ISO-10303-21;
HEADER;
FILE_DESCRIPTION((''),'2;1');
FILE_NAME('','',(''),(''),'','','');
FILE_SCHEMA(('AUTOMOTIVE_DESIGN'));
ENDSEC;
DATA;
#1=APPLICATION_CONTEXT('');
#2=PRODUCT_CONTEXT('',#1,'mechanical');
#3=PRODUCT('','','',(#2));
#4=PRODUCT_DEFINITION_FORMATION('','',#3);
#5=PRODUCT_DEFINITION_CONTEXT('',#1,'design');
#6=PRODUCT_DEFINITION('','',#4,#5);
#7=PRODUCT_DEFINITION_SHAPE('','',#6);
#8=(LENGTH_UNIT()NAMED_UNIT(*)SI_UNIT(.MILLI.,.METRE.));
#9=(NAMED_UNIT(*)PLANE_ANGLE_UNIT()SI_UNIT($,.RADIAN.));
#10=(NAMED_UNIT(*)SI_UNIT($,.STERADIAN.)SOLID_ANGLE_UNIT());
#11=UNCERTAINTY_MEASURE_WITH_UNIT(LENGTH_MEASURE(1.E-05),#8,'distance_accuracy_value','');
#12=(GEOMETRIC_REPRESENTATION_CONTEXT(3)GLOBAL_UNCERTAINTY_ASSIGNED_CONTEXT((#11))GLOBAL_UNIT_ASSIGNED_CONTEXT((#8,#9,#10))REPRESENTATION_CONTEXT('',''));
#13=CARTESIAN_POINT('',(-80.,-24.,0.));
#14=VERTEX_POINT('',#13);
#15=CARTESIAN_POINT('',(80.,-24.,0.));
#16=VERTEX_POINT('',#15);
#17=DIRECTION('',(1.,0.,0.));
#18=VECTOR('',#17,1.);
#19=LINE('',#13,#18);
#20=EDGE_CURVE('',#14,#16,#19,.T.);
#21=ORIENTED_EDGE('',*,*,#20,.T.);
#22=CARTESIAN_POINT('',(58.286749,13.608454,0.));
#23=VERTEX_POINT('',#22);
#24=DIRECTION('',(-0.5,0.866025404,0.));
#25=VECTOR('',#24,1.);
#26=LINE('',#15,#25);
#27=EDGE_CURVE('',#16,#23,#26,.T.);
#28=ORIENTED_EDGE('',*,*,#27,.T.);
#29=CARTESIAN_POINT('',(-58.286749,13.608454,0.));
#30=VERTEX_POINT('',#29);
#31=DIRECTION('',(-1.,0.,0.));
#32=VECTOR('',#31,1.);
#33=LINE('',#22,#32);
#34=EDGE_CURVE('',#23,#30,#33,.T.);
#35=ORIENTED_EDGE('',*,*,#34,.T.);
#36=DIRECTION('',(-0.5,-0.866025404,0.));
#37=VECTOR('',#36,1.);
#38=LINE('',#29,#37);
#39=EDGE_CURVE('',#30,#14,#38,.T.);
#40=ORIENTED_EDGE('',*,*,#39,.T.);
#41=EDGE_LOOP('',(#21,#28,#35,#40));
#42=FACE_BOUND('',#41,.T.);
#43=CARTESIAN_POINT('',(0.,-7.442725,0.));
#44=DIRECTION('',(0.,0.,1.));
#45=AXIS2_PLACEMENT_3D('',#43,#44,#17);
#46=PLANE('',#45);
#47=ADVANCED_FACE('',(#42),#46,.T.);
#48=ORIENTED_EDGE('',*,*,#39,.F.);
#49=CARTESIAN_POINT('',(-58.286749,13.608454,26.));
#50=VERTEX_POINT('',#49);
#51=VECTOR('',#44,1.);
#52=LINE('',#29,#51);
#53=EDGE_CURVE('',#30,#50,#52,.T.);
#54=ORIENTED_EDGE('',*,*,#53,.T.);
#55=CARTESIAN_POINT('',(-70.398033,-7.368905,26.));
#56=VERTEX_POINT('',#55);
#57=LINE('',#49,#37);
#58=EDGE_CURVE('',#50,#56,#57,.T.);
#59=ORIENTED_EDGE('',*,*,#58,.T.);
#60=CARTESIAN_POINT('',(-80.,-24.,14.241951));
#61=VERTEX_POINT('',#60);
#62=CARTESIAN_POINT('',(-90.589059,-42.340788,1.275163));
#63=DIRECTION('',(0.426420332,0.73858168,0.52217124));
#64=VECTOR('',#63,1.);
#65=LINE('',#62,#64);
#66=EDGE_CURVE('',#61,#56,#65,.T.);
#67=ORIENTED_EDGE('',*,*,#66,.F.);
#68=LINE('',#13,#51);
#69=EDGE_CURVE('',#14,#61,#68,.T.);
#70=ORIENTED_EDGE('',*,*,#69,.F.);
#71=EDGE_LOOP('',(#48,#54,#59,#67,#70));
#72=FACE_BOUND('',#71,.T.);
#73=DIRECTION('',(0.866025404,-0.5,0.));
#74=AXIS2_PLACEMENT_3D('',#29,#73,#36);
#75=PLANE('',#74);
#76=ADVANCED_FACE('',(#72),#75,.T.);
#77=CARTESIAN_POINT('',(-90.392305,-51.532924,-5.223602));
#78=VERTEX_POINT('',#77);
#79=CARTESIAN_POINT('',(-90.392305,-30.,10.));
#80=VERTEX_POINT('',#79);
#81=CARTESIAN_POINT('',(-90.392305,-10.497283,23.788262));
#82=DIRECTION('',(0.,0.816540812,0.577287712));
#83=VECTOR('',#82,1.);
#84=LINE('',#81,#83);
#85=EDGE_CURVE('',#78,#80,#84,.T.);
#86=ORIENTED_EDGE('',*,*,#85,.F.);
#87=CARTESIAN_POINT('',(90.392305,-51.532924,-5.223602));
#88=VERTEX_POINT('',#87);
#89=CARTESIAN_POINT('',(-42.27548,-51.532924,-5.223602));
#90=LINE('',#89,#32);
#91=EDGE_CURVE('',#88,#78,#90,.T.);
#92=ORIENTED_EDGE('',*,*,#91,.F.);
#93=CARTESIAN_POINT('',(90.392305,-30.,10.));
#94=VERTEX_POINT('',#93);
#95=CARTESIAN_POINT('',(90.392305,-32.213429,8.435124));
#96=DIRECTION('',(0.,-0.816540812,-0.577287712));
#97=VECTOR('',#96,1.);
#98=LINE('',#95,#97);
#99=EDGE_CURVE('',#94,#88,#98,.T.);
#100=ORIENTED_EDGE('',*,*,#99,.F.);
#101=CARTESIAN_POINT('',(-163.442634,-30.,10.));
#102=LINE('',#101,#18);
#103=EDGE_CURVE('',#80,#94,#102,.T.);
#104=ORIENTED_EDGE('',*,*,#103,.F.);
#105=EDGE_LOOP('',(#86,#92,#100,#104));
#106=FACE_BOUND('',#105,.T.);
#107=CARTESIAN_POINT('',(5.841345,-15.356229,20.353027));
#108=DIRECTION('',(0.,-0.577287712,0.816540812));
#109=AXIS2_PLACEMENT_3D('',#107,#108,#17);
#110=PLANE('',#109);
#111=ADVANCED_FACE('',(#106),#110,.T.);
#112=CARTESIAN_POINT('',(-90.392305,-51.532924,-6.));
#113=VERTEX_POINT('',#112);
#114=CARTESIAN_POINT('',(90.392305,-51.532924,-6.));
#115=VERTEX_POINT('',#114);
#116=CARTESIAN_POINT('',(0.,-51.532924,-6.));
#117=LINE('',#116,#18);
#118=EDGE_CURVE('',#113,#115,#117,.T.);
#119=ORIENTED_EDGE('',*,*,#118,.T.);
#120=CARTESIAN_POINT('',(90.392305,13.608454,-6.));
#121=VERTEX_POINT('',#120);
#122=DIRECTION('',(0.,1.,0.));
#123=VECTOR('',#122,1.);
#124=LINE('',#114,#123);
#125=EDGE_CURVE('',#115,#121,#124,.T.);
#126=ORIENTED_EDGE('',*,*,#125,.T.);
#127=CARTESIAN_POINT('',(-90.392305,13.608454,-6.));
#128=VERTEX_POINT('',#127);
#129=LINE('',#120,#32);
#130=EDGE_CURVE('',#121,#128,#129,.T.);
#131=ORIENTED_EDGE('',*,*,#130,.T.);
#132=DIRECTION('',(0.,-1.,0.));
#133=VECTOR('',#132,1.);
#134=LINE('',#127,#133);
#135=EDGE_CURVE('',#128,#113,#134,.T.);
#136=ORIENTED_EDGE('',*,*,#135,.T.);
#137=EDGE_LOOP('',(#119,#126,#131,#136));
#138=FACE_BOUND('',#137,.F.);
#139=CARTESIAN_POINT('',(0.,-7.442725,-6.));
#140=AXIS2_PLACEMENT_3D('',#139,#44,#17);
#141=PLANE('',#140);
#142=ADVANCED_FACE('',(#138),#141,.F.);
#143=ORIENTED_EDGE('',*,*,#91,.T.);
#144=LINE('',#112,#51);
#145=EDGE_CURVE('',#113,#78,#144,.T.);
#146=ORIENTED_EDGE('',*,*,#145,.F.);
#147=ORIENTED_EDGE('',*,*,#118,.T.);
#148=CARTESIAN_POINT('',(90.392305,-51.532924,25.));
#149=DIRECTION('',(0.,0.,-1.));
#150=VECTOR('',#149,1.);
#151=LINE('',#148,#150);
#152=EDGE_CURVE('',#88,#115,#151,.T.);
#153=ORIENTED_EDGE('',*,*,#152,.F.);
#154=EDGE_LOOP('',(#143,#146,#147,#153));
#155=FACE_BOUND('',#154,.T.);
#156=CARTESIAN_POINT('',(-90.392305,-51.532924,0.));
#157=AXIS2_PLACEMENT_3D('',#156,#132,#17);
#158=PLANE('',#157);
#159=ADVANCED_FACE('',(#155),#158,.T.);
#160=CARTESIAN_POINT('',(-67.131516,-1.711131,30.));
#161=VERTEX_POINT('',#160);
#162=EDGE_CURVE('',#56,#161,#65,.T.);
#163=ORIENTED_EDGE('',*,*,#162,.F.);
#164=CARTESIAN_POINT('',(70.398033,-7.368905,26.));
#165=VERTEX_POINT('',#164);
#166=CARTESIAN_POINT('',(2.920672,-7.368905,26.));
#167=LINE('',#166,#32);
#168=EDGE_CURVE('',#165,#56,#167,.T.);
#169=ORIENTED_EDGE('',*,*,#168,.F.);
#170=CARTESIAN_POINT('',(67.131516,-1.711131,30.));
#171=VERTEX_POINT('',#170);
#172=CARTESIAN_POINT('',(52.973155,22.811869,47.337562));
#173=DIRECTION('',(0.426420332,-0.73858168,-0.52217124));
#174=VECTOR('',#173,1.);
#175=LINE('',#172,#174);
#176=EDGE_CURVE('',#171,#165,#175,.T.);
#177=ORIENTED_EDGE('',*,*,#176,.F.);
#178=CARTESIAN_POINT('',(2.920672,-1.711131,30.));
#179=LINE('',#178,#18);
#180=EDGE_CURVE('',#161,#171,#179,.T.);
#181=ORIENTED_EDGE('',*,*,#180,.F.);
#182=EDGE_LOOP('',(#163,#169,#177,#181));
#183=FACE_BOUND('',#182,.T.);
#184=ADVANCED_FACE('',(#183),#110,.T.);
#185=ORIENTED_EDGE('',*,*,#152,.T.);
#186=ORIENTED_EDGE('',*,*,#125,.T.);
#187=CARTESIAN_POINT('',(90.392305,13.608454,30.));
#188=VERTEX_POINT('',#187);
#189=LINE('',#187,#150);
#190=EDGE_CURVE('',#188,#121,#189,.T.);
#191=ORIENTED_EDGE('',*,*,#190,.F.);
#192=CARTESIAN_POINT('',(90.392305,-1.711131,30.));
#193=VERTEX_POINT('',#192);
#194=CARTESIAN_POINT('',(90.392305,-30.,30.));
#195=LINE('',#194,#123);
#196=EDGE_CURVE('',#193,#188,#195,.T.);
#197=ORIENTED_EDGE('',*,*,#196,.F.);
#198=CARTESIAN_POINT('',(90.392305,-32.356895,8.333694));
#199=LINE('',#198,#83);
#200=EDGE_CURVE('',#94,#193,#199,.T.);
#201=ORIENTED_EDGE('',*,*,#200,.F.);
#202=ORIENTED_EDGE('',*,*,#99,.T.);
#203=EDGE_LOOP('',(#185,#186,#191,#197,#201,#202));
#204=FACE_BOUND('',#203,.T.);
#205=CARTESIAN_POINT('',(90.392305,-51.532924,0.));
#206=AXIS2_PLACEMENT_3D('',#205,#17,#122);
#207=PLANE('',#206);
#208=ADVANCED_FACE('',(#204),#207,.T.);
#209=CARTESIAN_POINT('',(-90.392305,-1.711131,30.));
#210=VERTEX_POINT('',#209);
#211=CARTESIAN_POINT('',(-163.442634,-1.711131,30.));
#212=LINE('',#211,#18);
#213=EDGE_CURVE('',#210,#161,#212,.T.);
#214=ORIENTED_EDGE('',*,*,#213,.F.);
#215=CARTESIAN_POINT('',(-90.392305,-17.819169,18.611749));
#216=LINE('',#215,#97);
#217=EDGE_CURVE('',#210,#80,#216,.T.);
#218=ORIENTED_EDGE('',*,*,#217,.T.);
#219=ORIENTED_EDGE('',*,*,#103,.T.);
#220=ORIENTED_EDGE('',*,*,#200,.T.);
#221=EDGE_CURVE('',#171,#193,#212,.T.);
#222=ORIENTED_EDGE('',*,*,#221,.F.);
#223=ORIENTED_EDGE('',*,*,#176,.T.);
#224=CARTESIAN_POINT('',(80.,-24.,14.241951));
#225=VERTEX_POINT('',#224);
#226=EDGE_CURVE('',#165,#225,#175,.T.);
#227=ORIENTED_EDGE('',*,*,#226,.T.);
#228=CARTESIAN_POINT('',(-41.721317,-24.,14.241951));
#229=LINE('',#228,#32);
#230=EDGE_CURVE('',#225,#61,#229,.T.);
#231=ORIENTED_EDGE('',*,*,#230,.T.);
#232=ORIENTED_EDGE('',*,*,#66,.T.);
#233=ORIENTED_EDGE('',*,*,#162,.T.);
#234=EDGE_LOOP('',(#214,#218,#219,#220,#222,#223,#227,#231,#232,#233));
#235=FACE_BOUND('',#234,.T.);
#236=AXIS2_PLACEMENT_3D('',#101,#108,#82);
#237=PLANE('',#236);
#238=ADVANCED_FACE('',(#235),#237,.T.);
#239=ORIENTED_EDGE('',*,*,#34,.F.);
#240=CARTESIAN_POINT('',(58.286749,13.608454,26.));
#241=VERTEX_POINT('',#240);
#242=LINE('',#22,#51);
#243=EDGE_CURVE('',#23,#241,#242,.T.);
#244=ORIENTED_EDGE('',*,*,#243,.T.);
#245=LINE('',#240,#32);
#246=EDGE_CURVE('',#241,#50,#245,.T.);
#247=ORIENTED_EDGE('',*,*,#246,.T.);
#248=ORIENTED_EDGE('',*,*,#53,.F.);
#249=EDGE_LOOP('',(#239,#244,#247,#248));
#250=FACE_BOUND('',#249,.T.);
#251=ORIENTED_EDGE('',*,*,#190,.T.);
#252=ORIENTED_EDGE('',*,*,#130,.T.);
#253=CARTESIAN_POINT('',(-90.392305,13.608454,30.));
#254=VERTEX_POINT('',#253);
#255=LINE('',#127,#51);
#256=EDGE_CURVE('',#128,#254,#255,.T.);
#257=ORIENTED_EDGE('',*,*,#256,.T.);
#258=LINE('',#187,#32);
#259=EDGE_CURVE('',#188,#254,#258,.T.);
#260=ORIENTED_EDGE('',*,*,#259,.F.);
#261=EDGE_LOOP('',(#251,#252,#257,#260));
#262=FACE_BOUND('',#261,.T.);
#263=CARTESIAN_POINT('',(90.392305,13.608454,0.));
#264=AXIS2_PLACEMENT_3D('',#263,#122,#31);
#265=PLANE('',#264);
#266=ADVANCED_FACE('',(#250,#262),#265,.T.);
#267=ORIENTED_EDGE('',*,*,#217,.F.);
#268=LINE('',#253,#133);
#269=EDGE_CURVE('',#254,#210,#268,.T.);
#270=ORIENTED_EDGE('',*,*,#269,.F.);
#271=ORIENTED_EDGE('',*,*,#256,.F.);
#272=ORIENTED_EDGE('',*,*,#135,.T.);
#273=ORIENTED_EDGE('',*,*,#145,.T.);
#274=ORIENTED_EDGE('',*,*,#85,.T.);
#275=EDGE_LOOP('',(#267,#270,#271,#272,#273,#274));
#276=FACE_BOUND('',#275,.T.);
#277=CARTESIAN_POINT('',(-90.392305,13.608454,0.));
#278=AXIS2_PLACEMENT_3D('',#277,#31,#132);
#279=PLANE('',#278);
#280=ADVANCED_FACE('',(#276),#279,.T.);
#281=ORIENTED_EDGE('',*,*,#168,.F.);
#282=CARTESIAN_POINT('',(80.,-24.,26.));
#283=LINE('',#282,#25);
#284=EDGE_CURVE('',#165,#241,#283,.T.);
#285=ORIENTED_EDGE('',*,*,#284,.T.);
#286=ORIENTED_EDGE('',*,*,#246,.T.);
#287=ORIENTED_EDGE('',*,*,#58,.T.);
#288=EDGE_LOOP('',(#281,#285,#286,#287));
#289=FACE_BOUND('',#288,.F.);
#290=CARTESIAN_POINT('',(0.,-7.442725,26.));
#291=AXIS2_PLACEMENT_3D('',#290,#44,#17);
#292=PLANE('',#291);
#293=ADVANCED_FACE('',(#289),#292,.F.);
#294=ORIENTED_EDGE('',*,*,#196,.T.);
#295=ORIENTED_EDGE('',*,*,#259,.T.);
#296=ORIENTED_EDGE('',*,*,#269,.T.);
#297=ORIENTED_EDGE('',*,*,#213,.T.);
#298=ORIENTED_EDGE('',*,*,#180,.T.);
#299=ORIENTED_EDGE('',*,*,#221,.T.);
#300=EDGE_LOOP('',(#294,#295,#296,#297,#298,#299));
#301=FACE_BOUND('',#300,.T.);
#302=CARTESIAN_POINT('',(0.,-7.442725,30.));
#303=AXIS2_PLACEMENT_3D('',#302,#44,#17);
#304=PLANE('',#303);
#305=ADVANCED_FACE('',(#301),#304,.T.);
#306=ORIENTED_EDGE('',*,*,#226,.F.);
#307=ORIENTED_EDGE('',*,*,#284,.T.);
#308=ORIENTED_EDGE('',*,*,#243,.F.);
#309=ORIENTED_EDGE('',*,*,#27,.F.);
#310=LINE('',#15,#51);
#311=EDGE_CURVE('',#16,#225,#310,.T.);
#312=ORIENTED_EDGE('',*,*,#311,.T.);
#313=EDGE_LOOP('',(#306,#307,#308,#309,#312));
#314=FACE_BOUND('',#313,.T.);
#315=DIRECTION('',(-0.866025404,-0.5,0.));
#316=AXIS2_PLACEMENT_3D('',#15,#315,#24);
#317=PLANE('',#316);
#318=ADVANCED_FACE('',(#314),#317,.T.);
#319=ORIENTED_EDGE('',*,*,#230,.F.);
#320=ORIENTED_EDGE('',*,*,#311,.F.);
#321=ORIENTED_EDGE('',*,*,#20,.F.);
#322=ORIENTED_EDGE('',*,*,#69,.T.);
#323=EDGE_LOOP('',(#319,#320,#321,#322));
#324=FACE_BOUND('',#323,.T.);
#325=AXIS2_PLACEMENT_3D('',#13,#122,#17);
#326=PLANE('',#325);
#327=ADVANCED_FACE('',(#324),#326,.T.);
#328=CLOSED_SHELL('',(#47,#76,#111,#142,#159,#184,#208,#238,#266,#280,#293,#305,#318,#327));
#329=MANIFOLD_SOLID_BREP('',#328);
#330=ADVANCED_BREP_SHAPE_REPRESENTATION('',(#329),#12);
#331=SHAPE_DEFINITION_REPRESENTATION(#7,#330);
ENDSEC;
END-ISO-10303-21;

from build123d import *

# Parameters (mm, degrees)
F1_DEPTH    = 30
F2_T1_DEPTH = 326.8852689227
F3_DEPTH    = 30
F0_W        = 180.7846096908
F0_H        = 21.5329241753
F6_DEPTH    = 25
F7_DEPTH    = 6
F5_W        = 259.5228254795
F5_H        = 121.416632086
F8_DEPTH    = 25
F9_DEPTH    = 26


# Not quite as in the source:
# - a fillet or chamfer that OpenCascade refuses, or shapes differently, is made with other operations: its cross-section is extruded or revolved along the edge and cut away or added


with BuildPart() as f1:
    # F0 (on Top) → F1 (new body)
    with BuildSketch(Plane.XY):
        Polygon((80, -24), (-80, -24), (-58.2867488807, 13.6084541361), (-65.214952111, 13.6084541361), (-73.0717967697, 0), (-90.3923048454, -30), (90.3923048454, -30), (73.0717967697, 0), (65.214952111, 13.6084541361), (58.2867488807, 13.6084541361), align=None)
        Polygon((-90.3923048454, -30), (-73.0717967697, 0), (-90.3923048454, 0), align=None)
        Polygon((90.3923048454, 0), (73.0717967697, 0), (90.3923048454, -30), align=None)
        Polygon((-73.0717967697, 0), (-65.214952111, 13.6084541361), (-90.3923048454, 13.6084541361), (-90.3923048454, 0), align=None)
        Polygon((90.3923048454, 13.6084541361), (65.214952111, 13.6084541361), (73.0717967697, 0), (90.3923048454, 0), align=None)
    extrude(amount=F1_DEPTH)

    # F2: chamfer of 20 x 28.2888686106 on 1 edges, made by hand

    # F2_s2 → F2_t1 (cut)
    with BuildSketch(Plane.YZ.offset(-163.4426344613)):
        Polygon((-30, 10), (-1.7111313894, 30), (-30, 30), align=None)
    extrude(amount=F2_T1_DEPTH, mode=Mode.SUBTRACT)

    # F0 (on Top) → F3 (join)
    with BuildSketch(Plane.XY):
        Polygon((-58.2867488807, 13.6084541361), (-80, -24), (80, -24), (58.2867488807, 13.6084541361), align=None)
    extrude(amount=F3_DEPTH)

    # F0 (on Top) → F6 (join)
    with BuildSketch(Plane.XY):
        with Locations((0, -40.7664620876)):
            Rectangle(F0_W, F0_H)
    extrude(amount=F6_DEPTH)

    # F0 (on Top) → F7 (join)
    with BuildSketch(Plane.XY):
        Polygon((-58.2867488807, 13.6084541361), (-80, -24), (80, -24), (58.2867488807, 13.6084541361), align=None)
        Polygon((80, -24), (-80, -24), (-58.2867488807, 13.6084541361), (-65.214952111, 13.6084541361), (-73.0717967697, 0), (-90.3923048454, -30), (90.3923048454, -30), (73.0717967697, 0), (65.214952111, 13.6084541361), (58.2867488807, 13.6084541361), align=None)
        Polygon((-90.3923048454, -30), (-73.0717967697, 0), (-90.3923048454, 0), align=None)
        Polygon((-73.0717967697, 0), (-65.214952111, 13.6084541361), (-90.3923048454, 13.6084541361), (-90.3923048454, 0), align=None)
        Polygon((90.3923048454, 13.6084541361), (65.214952111, 13.6084541361), (73.0717967697, 0), (90.3923048454, 0), align=None)
        Polygon((90.3923048454, 0), (73.0717967697, 0), (90.3923048454, -30), align=None)
        with Locations((0, -40.7664620876)):
            Rectangle(F0_W, F0_H)
    extrude(amount=-F7_DEPTH)

    # F5 (on offset) → F8 (cut)
    with BuildSketch(Plane(origin=(0, -14.7116228469, 20.8087582883), x_dir=(1, 0, 0), z_dir=(0, -0.5772877121, 0.8165408119))):
        with Locations((5.841344595, -0.7894355804)):
            Rectangle(F5_W, F5_H)
    extrude(amount=F8_DEPTH, mode=Mode.SUBTRACT)

    # F0 (on Top) → F9 (cut)
    with BuildSketch(Plane.XY):
        Polygon((-58.2867488807, 13.6084541361), (-80, -24), (80, -24), (58.2867488807, 13.6084541361), align=None)
    extrude(amount=F9_DEPTH, mode=Mode.SUBTRACT)


solid = f1.part
